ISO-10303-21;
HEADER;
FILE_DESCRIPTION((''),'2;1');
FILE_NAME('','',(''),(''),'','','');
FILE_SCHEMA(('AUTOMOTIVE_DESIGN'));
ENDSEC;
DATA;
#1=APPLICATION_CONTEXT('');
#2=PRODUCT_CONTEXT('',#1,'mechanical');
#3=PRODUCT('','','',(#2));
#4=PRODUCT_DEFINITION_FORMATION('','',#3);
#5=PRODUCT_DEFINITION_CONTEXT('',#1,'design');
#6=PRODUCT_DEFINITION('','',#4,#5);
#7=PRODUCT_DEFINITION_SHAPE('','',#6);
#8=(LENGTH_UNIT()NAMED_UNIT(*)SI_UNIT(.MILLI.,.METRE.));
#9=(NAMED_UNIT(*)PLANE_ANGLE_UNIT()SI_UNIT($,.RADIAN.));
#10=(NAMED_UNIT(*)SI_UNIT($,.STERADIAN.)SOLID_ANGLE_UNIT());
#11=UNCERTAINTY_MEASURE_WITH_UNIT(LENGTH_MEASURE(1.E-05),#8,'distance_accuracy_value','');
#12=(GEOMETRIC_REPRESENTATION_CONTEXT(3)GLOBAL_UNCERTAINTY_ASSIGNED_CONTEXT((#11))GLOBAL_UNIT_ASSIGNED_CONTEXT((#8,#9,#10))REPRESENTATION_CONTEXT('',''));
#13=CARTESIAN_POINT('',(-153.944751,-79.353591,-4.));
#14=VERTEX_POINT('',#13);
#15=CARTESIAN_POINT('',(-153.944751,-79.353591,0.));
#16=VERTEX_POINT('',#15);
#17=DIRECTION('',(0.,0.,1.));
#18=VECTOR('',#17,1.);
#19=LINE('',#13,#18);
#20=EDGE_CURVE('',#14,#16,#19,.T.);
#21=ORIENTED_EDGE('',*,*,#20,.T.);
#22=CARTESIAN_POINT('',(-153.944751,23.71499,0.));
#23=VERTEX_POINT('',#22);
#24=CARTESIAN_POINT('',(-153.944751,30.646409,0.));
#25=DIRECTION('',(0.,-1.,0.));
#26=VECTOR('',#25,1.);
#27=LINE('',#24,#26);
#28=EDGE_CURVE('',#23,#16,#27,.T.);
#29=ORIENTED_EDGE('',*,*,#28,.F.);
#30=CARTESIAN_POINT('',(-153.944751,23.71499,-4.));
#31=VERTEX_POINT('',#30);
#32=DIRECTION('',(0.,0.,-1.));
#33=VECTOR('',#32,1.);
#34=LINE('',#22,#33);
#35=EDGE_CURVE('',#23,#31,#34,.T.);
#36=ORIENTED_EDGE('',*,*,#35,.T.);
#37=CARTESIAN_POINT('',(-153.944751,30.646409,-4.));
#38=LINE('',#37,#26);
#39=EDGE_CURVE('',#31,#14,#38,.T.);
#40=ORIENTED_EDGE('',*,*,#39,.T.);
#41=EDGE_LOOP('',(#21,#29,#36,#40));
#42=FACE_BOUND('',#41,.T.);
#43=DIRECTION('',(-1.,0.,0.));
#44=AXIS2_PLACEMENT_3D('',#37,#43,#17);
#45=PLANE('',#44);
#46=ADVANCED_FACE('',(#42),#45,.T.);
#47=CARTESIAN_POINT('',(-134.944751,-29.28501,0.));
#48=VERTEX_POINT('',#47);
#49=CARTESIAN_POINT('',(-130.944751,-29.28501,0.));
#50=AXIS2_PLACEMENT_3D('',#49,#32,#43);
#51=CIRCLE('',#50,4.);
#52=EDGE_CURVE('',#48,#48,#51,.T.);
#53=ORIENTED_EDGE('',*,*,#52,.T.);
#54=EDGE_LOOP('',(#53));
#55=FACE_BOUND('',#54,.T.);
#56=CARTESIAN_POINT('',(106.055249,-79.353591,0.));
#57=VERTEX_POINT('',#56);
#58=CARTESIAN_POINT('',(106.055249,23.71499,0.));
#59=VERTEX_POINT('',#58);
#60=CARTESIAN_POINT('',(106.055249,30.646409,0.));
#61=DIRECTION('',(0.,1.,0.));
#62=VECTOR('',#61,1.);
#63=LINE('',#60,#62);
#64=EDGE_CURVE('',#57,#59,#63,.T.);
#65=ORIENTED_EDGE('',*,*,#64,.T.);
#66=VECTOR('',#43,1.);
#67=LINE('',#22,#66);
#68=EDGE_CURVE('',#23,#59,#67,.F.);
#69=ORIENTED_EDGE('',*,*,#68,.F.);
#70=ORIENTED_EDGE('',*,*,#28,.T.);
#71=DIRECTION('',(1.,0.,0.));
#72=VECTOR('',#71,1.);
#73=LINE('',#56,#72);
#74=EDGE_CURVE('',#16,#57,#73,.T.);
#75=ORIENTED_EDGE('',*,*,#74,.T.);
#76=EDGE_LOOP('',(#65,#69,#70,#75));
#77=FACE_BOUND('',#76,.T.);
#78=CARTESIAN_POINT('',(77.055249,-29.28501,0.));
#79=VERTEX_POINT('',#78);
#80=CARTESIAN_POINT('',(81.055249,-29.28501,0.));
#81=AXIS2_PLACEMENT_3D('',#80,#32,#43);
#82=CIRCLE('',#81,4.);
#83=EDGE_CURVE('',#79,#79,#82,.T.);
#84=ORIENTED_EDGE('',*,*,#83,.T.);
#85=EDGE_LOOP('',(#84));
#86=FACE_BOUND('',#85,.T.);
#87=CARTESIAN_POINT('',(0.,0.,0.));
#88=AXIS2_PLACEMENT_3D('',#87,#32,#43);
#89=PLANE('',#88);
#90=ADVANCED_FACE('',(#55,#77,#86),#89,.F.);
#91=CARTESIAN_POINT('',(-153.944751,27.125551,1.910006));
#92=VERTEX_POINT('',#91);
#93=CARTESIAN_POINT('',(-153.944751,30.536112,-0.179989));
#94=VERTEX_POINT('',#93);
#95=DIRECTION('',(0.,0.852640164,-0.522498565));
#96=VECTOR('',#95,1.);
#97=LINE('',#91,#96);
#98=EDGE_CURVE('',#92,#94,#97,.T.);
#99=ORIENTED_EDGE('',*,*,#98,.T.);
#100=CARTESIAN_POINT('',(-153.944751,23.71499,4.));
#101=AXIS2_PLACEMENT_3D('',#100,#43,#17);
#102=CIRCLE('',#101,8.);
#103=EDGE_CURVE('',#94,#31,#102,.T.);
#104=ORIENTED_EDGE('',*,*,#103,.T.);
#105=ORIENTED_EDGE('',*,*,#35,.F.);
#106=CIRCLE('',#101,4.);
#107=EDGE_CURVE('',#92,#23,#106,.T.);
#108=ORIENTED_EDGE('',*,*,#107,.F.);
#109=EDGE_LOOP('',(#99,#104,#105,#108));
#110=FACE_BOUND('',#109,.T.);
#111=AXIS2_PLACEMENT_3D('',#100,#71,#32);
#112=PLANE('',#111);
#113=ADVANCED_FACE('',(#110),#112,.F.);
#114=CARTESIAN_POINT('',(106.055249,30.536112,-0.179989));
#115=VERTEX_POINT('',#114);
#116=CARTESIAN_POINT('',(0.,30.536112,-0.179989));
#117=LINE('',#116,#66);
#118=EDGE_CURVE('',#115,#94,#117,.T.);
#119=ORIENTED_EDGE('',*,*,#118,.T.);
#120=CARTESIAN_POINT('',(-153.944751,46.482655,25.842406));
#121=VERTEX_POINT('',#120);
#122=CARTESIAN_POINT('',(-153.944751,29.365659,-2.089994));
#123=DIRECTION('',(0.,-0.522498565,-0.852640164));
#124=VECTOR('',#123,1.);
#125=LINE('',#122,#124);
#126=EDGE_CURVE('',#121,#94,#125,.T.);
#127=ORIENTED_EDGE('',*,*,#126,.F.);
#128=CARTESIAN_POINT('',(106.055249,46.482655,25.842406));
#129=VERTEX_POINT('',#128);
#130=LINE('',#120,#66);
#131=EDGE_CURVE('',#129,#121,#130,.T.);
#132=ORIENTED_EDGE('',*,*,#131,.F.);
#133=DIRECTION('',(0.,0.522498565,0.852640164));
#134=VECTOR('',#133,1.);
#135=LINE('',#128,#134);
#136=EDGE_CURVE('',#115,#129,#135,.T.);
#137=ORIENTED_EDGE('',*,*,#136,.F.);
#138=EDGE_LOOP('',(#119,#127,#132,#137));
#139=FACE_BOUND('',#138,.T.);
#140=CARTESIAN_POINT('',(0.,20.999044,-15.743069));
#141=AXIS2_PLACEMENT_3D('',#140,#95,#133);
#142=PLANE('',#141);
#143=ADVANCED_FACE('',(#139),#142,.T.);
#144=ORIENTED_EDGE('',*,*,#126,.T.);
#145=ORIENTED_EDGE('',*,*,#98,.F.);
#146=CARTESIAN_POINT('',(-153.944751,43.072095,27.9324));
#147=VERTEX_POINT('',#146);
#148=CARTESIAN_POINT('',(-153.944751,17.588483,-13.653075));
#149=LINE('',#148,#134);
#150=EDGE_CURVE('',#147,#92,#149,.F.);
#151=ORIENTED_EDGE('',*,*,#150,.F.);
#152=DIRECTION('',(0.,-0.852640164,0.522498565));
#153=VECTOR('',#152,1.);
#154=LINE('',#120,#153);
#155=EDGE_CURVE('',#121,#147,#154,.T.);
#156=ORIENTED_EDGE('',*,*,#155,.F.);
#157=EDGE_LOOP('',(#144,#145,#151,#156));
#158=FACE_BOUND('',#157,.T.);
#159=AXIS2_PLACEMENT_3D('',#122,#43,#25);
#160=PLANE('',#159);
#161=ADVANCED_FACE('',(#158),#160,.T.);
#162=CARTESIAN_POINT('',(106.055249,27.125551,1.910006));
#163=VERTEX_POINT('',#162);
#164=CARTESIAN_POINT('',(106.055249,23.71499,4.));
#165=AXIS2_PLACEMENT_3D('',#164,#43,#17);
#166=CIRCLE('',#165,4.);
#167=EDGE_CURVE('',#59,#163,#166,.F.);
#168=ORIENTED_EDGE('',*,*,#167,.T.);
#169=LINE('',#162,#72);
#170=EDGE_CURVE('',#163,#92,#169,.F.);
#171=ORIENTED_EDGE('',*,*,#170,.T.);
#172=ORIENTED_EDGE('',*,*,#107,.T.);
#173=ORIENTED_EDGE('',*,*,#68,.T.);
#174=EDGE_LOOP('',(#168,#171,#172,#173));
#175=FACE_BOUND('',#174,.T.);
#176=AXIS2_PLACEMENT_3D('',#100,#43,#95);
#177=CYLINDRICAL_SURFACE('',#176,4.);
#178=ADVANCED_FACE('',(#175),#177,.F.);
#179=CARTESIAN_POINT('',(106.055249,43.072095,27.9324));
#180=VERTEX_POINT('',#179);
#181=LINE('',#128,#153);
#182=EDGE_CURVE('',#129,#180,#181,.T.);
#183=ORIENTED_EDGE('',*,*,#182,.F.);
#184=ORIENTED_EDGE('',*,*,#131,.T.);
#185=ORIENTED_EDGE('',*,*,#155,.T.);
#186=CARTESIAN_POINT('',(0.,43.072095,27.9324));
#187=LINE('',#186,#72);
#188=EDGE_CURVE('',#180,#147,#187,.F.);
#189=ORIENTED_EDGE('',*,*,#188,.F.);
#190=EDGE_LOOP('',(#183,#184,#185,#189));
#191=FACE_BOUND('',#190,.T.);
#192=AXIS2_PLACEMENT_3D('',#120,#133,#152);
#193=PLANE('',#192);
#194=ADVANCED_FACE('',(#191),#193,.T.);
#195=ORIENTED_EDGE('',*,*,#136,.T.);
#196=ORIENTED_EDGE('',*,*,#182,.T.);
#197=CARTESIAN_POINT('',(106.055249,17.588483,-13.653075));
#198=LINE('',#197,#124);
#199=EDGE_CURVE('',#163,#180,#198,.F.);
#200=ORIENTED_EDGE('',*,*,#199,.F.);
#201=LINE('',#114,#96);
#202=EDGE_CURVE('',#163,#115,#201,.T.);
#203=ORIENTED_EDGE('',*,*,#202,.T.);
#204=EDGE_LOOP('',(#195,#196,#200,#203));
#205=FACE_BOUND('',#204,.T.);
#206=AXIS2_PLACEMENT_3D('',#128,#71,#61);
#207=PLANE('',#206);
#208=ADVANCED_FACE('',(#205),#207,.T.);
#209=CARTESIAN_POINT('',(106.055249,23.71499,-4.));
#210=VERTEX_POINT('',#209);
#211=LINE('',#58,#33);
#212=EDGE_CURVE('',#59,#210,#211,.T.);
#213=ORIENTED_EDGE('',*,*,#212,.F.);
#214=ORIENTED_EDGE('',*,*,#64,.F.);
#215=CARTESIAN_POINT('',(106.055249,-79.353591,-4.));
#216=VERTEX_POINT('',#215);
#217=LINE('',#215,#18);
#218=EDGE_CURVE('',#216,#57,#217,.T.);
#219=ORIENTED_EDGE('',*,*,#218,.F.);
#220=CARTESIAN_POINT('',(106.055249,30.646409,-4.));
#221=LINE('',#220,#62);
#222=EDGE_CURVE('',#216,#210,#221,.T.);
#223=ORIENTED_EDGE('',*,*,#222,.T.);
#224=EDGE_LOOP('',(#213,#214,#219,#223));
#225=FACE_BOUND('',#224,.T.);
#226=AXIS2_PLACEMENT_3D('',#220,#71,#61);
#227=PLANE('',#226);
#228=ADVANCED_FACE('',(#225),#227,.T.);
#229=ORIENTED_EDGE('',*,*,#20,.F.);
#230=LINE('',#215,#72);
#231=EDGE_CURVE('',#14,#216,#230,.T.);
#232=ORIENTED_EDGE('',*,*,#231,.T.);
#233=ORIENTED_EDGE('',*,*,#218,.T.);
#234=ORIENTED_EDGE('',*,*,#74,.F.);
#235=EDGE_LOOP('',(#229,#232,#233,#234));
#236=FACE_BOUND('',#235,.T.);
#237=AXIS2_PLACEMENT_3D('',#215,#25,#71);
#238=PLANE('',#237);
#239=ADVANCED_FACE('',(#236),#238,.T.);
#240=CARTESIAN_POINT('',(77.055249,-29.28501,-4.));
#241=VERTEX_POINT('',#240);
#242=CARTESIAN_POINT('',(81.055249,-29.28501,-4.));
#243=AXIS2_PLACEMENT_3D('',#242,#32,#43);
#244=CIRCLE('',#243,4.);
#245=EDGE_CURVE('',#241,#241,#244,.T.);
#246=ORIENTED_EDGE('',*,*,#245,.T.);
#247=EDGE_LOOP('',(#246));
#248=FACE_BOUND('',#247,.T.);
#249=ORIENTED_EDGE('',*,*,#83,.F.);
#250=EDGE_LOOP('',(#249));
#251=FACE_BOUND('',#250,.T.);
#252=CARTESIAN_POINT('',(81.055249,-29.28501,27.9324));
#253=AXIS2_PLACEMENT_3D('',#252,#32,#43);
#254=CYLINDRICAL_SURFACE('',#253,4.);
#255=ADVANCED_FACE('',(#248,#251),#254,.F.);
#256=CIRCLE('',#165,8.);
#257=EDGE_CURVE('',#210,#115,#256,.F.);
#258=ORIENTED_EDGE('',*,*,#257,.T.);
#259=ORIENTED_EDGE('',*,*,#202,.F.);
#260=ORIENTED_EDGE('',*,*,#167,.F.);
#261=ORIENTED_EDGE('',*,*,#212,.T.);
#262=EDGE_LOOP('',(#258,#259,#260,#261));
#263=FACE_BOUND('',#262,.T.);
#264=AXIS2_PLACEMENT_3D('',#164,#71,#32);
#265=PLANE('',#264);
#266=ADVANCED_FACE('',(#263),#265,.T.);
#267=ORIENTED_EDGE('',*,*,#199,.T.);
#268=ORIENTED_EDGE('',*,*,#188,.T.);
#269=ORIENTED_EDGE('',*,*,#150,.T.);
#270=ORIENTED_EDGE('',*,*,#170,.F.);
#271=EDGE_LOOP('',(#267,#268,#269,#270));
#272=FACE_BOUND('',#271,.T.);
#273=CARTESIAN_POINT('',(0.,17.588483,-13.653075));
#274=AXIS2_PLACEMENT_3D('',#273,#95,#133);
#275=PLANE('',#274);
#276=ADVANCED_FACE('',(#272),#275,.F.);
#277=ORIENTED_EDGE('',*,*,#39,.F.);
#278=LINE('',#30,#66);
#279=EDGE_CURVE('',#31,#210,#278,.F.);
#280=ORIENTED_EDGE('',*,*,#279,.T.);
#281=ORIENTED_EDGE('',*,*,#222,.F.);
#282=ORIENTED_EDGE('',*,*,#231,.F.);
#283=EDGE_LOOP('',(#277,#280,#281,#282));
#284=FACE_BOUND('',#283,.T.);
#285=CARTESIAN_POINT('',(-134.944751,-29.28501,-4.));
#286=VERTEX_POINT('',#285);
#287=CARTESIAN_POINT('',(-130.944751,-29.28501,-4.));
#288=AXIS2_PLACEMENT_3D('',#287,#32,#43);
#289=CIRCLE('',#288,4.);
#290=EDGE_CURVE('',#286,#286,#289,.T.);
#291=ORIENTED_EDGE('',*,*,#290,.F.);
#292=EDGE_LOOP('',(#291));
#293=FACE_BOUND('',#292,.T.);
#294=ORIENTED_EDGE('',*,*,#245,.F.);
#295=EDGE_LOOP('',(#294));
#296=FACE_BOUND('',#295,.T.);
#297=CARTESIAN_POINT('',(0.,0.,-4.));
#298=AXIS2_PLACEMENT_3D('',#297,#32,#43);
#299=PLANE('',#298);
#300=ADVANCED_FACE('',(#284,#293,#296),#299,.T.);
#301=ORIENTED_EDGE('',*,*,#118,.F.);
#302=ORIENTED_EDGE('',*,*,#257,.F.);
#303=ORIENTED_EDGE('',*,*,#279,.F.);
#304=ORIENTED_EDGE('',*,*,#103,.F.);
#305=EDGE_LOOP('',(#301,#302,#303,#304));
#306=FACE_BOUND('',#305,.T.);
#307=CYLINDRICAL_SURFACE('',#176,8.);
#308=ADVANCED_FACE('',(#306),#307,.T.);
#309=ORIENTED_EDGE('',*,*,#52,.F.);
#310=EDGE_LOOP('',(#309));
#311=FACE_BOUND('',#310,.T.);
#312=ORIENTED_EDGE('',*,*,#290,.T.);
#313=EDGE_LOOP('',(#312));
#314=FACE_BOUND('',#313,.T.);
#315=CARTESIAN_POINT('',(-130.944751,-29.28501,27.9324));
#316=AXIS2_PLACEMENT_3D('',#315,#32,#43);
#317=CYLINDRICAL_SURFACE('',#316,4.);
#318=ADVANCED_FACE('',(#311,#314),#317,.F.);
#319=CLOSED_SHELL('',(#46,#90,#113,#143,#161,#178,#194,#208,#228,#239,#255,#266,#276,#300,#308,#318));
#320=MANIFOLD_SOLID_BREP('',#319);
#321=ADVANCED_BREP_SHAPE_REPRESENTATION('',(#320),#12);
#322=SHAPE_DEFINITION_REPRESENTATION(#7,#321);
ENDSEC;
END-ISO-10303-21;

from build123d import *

# Parameters (mm, degrees)
SKETCH1_W            = 260
SKETCH1_H            = 110
BASE_FLANGE1_DEPTH   = 4
EDGE_FLANGE1_START   = -153.944751381
EDGE_FLANGE1_DEPTH   = 260
EDGE_FLANGE1_2_DEPTH = 260
SKETCH11_R           = 4
CUT_EXTRUDE1_DEPTH   = 177.112626118


# Read off the part's stored shape, not the designer's step: Edge-Flange1
# Sheet-metal steps are written as plain solids
with BuildPart() as part:
    # Sketch1 → Base-Flange1 (new body)
    with BuildSketch(Plane.XY):
        with Locations((-23.944751381, -24.35359116)):
            Rectangle(SKETCH1_W, SKETCH1_H)
    extrude(amount=-BASE_FLANGE1_DEPTH)

    # Edge-Flange1 outline → Edge-Flange1 (cut)
    with BuildSketch(Plane.YZ.offset(EDGE_FLANGE1_START)):
        with BuildLine():
            Line((30.64640884, 0), (30.536111734, -0.179988518))
            ThreePointArc((30.536111734, -0.179988518), (27.623960351, -2.979968057), (23.714990419, -4))
            Line((23.714990419, -4), (30.64640884, -4))
            Line((30.64640884, -4), (30.64640884, 0))
        make_face()
    extrude(amount=EDGE_FLANGE1_DEPTH, mode=Mode.SUBTRACT)

    # Edge-Flange1 2 outline → Edge-Flange1 2 (add)
    with BuildSketch(Plane.YZ.offset(EDGE_FLANGE1_START)):
        with BuildLine():
            Line((23.714990419, 0), (30.64640884, 0))
            Line((30.64640884, 0), (46.482655452, 25.842405752))
            Line((46.482655452, 25.842405752), (43.072094795, 27.932400011))
            Line((43.072094795, 27.932400011), (27.125551077, 1.910005741))
            ThreePointArc((27.125551077, 1.910005741), (25.669475385, 0.510015972), (23.714990419, 0))
        make_face()
    extrude(amount=EDGE_FLANGE1_2_DEPTH)

    # Sketch11 → Cut-Extrude1 (cut, through all)
    with BuildSketch(Plane(origin=(0, 0, -4), x_dir=(-1, 0, 0), z_dir=(0, 0, -1))):
        with Locations((-81.055248619, -29.285009581)):
            Circle(SKETCH11_R)
        with Locations((130.944751381, -29.285009581)):
            Circle(SKETCH11_R)
    extrude(amount=-CUT_EXTRUDE1_DEPTH, mode=Mode.SUBTRACT)


solid = part.part
